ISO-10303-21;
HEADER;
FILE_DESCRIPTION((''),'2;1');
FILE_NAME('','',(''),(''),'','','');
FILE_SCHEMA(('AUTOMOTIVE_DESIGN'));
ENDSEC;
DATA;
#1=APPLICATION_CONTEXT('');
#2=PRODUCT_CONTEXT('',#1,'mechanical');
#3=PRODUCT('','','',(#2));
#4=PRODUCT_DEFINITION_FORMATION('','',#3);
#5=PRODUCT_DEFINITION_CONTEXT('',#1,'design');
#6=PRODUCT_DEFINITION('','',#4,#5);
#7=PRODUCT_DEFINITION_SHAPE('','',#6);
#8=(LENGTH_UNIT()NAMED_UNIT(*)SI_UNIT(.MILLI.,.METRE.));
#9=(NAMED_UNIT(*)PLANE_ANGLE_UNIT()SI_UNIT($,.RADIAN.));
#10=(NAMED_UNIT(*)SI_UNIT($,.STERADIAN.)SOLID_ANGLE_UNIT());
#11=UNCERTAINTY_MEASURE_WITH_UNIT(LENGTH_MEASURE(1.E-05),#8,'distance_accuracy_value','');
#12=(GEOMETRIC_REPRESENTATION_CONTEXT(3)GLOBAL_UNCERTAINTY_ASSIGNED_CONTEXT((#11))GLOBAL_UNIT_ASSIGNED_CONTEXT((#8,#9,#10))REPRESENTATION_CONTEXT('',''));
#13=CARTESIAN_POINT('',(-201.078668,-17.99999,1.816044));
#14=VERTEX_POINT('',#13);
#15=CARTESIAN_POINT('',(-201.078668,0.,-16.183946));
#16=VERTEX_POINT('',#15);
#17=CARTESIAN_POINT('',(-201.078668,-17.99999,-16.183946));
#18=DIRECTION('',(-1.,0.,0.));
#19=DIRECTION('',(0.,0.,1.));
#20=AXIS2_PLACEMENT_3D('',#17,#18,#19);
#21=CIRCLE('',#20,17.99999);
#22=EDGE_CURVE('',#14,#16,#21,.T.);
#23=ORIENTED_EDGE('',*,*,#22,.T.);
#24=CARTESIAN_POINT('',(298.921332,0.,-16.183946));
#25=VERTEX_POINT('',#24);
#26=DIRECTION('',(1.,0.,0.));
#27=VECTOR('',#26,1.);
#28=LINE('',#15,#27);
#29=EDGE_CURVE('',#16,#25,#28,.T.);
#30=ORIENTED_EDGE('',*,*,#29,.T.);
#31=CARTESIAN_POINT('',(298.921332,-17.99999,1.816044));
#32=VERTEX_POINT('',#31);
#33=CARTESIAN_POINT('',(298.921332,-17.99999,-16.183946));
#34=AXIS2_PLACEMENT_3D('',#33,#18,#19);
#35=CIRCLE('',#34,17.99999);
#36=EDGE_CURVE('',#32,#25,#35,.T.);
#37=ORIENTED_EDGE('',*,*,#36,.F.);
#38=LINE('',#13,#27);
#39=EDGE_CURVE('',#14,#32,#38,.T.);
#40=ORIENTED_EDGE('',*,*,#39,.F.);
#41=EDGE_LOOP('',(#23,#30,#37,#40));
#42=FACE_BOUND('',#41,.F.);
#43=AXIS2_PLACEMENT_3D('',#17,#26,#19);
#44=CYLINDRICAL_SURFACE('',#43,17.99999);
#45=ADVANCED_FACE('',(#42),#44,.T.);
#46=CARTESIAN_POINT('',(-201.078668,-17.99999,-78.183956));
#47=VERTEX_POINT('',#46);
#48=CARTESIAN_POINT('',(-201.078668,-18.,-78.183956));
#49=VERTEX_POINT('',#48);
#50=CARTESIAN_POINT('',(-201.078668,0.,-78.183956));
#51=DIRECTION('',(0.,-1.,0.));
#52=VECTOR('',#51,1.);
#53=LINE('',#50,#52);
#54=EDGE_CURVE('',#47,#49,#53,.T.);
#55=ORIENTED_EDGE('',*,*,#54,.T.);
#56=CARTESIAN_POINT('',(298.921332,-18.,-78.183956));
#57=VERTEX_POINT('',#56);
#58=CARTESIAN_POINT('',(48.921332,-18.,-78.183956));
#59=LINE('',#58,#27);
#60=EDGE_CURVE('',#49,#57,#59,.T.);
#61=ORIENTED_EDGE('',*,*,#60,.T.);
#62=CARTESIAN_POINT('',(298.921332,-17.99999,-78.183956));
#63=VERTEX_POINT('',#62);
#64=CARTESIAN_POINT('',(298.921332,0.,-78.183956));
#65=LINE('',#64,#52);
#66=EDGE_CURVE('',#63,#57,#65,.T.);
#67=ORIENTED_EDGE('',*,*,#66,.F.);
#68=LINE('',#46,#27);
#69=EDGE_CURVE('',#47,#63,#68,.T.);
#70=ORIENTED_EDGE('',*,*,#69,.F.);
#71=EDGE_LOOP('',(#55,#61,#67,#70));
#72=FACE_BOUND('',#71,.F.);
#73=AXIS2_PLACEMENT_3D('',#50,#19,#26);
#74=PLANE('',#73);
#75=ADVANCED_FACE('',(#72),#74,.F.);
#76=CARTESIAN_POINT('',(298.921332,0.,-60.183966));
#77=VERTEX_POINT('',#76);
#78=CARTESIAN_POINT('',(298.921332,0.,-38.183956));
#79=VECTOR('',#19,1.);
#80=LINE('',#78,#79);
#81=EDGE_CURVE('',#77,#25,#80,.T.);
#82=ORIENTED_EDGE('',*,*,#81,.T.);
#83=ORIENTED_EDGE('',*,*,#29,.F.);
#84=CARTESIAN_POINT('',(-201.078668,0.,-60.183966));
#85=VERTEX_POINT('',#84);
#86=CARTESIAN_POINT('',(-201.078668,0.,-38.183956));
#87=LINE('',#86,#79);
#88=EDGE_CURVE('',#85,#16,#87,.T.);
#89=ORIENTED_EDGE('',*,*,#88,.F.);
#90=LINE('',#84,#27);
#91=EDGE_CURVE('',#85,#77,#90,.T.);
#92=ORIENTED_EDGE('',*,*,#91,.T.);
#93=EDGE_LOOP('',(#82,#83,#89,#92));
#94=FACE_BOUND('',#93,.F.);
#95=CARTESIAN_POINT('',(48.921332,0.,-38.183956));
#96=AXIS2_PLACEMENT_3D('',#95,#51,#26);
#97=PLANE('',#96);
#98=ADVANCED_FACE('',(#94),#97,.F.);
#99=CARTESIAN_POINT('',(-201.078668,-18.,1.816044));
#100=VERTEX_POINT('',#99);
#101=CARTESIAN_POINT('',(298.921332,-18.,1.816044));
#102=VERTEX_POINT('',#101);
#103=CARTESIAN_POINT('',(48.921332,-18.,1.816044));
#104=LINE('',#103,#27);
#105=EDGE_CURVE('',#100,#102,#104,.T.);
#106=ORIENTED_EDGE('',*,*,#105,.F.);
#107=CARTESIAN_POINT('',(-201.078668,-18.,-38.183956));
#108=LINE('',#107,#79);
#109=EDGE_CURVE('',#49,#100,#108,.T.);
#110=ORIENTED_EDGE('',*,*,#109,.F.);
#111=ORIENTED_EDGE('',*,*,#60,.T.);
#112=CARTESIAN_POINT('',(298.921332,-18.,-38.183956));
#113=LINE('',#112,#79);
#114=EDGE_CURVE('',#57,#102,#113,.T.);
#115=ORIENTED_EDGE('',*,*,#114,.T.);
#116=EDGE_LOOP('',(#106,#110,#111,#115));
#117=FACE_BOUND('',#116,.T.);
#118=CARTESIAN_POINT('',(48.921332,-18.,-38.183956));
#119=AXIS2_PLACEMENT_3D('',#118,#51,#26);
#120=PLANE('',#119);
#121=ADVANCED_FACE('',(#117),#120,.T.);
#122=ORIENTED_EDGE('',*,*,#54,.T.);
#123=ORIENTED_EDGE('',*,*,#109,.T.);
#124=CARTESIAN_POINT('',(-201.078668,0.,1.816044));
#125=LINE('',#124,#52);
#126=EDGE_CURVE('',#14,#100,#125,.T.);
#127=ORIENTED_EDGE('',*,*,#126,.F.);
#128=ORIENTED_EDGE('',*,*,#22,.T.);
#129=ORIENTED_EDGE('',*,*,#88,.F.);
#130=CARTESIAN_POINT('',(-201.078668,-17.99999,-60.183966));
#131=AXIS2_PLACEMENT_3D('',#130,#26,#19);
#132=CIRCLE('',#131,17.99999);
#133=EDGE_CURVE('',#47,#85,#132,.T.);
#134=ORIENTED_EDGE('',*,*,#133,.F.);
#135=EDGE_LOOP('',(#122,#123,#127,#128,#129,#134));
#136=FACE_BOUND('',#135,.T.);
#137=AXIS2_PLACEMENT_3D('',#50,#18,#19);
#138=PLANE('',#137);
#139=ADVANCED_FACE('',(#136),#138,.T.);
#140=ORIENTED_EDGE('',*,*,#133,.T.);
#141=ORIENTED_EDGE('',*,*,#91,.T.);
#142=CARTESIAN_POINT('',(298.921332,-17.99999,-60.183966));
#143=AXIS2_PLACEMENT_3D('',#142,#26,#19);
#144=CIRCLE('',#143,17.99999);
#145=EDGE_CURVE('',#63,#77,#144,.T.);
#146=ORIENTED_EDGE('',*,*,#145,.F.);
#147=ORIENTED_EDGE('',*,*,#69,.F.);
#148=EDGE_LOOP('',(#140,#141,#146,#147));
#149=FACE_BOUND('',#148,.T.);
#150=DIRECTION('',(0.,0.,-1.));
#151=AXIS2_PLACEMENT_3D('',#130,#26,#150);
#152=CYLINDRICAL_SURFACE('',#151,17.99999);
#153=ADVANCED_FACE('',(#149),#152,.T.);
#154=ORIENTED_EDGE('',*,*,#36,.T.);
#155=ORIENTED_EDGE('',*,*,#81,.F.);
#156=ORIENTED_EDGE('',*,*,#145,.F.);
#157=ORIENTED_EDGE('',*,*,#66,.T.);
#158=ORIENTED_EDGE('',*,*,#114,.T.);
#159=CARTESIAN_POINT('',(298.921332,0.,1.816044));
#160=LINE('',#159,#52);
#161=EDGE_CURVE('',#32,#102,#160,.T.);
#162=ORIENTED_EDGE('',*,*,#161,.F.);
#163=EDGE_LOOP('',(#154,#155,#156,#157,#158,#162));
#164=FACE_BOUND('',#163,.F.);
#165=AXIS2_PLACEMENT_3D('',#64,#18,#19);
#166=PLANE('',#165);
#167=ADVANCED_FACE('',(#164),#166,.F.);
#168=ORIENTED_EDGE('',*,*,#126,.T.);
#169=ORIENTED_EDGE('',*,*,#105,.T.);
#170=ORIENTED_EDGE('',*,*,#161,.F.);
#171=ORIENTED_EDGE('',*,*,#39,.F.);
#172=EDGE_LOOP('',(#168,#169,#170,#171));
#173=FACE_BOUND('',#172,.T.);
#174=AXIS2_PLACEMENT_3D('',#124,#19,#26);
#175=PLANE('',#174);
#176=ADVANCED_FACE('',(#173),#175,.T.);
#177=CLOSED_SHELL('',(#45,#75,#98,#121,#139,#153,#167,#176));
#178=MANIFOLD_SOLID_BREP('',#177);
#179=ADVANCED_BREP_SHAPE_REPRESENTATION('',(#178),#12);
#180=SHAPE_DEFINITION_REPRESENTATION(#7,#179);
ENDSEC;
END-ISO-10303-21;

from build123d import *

# Parameters (mm, degrees)
F0_W     = 500
F0_H     = 80
F1_DEPTH = 18
F2_R     = 17.99999


# Not quite as in the source:
# - a fillet or chamfer is up to 0.001 mm smaller than in the source, because OpenCascade refuses the exact size


with BuildPart() as f1:
    # F0 (on Front) → F1 (new body)
    with BuildSketch(Plane.XZ):
        with Locations((48.9213317633, -38.1839564443)):
            Rectangle(F0_W, F0_H)
    extrude(amount=F1_DEPTH)

    # F2 (radius 18 in the source; OpenCascade refuses exactly that, so slightly less here)
    f2_edges = [f1.edges().sort_by_distance(p)[0] for p in [
        (48.921332, 0, -78.183956),
        (48.921332, 0, 1.816044),
    ]]
    fillet(f2_edges, radius=F2_R)


solid = f1.part
